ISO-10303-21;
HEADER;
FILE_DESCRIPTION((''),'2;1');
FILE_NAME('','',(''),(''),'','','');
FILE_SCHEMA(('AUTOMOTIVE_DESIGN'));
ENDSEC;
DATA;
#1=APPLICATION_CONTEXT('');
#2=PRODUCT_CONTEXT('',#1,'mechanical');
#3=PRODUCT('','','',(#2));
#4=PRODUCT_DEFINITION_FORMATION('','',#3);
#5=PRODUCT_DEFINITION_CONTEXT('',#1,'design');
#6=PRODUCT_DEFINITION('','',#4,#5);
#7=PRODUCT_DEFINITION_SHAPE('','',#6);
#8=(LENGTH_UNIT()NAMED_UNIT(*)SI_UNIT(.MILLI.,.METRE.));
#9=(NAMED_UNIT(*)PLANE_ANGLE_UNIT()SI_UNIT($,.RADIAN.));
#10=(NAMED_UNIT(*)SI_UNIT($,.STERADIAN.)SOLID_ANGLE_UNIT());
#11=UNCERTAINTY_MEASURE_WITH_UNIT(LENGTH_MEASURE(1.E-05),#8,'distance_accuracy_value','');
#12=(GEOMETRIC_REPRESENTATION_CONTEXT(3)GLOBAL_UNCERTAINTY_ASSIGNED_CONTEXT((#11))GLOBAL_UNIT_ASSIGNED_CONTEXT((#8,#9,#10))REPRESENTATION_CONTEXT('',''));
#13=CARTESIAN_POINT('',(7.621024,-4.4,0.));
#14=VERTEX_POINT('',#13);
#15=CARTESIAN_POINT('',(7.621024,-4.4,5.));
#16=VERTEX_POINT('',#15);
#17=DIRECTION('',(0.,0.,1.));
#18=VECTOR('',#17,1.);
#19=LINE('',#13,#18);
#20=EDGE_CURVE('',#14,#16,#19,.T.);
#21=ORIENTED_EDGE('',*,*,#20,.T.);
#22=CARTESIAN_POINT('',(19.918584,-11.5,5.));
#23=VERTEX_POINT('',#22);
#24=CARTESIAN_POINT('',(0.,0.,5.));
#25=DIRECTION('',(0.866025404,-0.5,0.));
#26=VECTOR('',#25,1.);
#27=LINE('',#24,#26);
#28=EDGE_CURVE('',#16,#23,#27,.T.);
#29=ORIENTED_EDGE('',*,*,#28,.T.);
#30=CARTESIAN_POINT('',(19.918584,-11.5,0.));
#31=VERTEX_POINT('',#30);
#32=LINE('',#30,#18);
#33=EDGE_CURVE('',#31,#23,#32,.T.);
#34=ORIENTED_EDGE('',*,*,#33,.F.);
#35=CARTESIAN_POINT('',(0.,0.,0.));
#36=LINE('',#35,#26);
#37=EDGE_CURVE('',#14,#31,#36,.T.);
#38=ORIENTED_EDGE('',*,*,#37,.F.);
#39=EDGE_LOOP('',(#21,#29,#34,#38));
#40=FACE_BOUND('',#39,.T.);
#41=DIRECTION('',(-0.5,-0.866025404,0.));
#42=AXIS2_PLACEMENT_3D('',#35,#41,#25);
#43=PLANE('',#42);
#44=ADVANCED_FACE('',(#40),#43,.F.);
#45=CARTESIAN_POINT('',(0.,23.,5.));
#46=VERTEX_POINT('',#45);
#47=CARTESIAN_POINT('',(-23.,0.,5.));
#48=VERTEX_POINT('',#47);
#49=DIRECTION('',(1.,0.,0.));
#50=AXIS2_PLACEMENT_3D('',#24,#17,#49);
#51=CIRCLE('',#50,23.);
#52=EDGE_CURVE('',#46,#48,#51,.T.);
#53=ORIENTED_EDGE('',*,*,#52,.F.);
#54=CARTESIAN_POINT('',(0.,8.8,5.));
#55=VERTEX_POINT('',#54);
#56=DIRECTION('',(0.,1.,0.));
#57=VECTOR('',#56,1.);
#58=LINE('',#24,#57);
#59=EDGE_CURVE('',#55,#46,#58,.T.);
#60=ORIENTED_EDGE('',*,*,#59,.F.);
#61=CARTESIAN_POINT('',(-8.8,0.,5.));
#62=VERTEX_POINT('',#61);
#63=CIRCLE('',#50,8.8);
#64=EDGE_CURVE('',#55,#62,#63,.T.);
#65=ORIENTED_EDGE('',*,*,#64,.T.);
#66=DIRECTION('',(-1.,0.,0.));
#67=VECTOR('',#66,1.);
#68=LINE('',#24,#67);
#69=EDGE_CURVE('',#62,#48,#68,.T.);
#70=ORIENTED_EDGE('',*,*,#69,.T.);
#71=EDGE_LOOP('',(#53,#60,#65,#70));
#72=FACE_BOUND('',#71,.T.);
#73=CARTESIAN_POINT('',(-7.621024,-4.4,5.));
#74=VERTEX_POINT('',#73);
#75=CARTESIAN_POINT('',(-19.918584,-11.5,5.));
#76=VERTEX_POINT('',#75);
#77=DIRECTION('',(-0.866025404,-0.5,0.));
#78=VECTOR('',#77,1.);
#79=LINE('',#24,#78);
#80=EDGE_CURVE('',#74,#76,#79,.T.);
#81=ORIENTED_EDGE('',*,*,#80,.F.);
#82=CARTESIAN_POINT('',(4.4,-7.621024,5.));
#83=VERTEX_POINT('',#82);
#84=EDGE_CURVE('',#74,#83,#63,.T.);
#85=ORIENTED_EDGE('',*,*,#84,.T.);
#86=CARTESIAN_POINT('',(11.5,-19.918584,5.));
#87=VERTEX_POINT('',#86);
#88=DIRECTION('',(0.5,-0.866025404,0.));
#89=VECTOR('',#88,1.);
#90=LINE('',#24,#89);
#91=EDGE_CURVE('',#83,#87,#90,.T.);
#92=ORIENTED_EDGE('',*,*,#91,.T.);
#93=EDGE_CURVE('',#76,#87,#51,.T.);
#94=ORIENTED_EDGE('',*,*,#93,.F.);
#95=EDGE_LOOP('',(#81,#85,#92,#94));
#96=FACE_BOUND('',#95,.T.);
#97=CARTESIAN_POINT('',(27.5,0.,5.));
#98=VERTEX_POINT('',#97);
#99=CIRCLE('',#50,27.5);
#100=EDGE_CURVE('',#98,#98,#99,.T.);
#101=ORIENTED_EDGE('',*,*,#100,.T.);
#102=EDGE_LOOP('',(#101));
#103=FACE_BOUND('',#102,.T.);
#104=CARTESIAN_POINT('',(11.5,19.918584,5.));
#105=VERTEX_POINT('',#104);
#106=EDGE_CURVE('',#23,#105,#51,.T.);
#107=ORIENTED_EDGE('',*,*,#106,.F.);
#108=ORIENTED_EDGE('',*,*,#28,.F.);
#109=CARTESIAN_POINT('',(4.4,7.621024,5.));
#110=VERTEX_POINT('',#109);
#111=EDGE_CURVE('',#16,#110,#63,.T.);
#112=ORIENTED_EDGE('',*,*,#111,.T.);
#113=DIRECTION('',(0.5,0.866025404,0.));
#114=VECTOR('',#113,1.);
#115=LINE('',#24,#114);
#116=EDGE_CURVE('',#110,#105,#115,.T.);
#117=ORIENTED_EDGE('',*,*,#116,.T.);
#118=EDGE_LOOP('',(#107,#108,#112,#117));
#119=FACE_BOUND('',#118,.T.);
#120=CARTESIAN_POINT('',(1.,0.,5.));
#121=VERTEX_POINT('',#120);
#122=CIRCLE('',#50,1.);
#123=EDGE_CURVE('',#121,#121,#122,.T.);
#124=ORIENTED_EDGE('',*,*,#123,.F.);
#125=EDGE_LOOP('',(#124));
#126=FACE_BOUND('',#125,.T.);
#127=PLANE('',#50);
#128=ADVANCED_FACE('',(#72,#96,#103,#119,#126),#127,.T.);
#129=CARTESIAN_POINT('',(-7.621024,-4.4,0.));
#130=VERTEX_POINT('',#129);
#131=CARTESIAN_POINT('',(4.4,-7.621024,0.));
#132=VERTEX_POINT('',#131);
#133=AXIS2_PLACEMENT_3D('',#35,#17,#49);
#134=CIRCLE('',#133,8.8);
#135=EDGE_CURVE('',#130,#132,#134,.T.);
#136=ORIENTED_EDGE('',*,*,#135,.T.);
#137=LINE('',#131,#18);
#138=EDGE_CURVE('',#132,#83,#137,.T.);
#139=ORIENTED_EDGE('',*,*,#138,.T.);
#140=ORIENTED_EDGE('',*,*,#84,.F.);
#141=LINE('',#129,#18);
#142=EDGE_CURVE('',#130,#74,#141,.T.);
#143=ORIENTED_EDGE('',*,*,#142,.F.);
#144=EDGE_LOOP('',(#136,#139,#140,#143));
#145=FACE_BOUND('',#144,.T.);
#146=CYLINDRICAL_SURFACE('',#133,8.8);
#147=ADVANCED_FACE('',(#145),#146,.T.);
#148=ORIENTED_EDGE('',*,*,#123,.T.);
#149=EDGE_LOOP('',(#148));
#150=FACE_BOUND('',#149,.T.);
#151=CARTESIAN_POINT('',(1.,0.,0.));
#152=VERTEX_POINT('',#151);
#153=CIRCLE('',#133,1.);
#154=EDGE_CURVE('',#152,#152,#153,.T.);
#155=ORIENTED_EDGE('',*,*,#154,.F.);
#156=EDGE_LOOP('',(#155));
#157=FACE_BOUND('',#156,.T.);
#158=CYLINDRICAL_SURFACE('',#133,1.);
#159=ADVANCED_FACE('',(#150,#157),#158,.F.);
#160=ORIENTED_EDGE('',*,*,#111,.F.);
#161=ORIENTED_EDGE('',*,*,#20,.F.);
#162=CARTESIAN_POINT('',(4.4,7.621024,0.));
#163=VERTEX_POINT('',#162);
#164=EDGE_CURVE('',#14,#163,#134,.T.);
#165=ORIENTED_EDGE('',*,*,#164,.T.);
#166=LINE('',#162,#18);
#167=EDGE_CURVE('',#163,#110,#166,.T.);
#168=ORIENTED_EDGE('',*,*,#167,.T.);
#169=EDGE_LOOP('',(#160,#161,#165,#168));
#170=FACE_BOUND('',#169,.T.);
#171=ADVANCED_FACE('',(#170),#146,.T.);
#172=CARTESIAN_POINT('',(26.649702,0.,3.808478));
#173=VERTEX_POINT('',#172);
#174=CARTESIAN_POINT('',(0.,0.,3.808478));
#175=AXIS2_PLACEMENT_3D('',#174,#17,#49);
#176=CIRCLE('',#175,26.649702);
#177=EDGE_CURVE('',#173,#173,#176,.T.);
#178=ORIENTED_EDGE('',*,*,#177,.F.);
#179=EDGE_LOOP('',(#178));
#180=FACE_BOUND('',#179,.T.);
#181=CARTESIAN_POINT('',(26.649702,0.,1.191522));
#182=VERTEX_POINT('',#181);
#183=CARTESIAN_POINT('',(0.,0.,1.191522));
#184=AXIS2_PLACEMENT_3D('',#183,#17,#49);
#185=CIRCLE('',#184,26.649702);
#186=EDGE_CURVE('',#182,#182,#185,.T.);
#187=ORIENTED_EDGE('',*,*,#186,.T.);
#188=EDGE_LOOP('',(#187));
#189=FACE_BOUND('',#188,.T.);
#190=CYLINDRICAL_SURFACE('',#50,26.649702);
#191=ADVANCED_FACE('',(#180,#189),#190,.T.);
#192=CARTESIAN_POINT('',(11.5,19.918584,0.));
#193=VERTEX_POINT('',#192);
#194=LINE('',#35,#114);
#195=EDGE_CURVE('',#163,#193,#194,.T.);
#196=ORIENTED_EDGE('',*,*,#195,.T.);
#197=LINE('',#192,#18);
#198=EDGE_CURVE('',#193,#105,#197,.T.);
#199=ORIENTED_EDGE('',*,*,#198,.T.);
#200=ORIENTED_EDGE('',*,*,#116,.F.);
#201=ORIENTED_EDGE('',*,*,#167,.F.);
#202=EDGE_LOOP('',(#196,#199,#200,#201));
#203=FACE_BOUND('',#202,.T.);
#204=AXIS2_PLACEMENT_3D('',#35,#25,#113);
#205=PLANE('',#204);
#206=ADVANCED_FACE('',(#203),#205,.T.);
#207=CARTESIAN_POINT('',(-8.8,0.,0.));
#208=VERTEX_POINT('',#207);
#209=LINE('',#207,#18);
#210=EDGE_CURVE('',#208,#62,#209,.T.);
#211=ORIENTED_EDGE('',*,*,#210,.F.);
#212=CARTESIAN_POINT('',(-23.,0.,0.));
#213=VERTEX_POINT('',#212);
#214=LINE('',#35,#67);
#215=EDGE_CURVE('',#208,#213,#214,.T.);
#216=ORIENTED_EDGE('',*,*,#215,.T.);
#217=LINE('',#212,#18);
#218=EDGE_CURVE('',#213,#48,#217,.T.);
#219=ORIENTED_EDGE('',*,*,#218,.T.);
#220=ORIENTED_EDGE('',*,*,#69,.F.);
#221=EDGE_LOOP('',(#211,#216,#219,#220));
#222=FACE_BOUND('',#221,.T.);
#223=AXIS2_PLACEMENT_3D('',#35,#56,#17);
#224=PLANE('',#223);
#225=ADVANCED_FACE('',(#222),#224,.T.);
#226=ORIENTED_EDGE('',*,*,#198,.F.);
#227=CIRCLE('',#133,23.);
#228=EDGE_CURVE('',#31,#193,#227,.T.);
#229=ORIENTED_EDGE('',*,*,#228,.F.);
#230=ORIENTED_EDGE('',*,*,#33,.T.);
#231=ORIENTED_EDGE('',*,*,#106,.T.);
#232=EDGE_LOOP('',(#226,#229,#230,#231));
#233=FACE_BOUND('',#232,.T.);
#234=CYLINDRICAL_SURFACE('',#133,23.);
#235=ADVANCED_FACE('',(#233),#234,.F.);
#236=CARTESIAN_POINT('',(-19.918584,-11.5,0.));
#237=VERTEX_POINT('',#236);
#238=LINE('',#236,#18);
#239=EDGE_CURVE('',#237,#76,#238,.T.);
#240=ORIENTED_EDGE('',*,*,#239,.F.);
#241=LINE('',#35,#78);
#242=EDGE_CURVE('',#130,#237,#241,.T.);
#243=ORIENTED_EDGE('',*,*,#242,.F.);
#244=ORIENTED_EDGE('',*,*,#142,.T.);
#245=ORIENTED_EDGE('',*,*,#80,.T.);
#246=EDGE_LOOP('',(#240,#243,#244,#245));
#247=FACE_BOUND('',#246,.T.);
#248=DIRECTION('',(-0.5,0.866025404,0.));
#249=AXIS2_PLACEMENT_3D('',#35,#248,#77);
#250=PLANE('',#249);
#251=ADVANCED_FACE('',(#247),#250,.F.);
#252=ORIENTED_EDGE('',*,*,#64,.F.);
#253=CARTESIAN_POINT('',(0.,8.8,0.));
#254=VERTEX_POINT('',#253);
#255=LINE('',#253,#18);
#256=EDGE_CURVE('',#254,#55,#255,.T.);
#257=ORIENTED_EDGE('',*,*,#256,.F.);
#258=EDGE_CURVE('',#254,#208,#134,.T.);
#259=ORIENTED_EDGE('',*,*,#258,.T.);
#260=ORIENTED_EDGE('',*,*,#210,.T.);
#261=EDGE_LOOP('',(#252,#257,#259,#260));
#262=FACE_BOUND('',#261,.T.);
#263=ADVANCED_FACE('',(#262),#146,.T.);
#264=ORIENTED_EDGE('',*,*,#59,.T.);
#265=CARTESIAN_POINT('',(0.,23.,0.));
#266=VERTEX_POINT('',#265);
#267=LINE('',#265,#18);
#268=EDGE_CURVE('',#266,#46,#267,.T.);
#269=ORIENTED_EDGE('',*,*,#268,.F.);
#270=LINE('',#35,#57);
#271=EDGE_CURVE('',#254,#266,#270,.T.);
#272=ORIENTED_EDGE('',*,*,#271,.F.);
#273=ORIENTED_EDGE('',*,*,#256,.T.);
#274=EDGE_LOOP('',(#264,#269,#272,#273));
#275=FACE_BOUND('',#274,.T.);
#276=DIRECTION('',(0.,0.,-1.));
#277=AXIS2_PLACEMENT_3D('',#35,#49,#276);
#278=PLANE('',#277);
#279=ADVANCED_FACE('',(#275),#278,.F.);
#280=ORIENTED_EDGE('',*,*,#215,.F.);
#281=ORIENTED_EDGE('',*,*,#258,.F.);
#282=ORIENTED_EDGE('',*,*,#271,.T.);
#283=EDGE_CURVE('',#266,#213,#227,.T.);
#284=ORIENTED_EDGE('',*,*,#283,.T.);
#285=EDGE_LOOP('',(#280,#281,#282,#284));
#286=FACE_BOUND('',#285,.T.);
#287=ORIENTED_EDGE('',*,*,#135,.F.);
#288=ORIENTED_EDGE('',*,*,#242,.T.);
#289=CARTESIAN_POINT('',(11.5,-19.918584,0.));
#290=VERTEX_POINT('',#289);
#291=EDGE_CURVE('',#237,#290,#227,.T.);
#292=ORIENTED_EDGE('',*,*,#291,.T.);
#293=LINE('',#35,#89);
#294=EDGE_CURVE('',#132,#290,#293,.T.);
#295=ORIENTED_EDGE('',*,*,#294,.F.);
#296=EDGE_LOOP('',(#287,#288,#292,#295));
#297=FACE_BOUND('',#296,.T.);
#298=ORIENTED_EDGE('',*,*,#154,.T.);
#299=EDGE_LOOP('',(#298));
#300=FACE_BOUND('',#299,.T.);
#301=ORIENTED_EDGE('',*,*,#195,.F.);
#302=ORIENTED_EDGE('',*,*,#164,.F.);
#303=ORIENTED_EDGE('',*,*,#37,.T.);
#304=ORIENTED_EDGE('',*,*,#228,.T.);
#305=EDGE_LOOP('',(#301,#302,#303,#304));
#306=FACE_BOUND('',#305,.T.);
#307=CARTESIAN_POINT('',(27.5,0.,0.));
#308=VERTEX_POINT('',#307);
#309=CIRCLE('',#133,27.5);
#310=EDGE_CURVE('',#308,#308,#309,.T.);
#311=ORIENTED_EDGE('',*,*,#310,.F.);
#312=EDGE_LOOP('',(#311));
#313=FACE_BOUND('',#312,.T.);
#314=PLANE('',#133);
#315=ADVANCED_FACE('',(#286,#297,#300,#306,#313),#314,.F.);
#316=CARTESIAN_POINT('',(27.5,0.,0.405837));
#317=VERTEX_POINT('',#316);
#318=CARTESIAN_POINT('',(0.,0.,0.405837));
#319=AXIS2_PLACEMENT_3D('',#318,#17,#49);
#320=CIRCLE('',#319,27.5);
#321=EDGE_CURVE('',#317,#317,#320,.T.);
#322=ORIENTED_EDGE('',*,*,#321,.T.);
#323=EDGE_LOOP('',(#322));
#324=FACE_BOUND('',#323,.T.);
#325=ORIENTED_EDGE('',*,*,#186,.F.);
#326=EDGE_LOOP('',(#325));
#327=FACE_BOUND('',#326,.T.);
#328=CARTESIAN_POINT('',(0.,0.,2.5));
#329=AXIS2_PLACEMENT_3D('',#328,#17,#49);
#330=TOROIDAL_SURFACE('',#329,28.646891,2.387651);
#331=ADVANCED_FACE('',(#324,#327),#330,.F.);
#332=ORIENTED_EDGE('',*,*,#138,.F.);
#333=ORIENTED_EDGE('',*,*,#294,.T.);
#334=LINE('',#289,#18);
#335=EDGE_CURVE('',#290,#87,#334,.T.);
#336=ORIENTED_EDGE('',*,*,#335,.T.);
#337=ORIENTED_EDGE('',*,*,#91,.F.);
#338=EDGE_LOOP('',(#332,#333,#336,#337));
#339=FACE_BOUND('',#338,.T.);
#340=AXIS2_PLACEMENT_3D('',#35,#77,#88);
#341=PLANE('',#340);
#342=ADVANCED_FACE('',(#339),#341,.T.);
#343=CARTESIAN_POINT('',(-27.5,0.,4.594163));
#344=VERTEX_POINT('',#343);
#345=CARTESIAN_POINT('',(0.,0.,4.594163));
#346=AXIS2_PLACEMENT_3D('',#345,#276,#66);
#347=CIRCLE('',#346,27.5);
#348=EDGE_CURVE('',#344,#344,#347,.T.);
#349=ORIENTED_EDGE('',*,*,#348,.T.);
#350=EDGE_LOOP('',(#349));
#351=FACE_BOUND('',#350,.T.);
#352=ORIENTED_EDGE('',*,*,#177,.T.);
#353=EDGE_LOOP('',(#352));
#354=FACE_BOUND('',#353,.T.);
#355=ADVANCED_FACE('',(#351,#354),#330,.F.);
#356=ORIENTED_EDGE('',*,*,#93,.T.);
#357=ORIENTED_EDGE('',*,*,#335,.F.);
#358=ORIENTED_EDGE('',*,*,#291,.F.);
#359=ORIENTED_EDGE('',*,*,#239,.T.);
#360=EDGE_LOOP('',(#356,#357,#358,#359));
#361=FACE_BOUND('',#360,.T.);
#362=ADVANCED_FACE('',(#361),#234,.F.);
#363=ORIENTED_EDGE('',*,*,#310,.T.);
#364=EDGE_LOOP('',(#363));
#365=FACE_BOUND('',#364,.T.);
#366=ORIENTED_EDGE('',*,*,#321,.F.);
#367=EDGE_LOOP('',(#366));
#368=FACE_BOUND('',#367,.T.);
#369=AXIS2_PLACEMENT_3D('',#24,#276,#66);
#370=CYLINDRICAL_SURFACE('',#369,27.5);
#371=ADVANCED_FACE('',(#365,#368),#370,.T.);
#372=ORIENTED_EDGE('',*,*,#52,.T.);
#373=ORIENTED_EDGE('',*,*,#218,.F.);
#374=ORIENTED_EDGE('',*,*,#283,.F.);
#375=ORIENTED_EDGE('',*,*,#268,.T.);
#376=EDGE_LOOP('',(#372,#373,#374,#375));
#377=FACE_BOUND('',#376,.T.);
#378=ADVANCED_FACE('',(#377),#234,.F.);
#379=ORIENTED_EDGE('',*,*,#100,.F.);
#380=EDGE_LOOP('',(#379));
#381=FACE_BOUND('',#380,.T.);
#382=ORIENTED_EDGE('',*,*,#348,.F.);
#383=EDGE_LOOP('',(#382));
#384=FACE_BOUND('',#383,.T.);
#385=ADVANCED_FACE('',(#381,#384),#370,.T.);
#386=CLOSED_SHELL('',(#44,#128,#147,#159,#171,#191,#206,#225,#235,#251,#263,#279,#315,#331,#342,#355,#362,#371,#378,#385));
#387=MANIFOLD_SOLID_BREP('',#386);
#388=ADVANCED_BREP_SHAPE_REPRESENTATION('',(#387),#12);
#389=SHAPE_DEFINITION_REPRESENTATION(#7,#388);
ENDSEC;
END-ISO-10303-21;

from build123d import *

# Parameters (mm, degrees)
ESBO_O1_R                = 27.5
RESSALTO_EXTRUS_O1_DEPTH = 5
ESBO_O9_R                = 1
CORTE_EXTRUS_O1_DEPTH    = 5
CORTE_EXTRUS_O2_DEPTH    = 5


with BuildPart() as part:
    # Esboço1 → Ressalto-extrusão1 (new body)
    with BuildSketch(Plane.XY):
        Circle(ESBO_O1_R)
    extrude(amount=RESSALTO_EXTRUS_O1_DEPTH)

    # Esboço7 → Corte-Revolução4 (revolve, cut)
    with BuildSketch(Plane(origin=(0, 0, 0), x_dir=(0, 0, -1), z_dir=(1, 0, 0))):
        with BuildLine():
            ThreePointArc((-0.112348688, 28.646890778), (-3.63505257, 30.747494132), (-3.808478377, 26.649701973))
            Line((-3.808478377, 26.649701973), (-1.191521623, 26.649701973))
            ThreePointArc((-1.191521623, 26.649701973), (-0.399396646, 27.511838208), (-0.112348688, 28.646890778))
        make_face()
    revolve(axis=Axis((0, 0, 5), (0, 0, -1)), mode=Mode.SUBTRACT)

    # Esboço9 → Corte-extrusão1 (cut)
    with BuildSketch(Plane.XY.offset(5)):
        Circle(ESBO_O9_R)
    extrude(amount=-CORTE_EXTRUS_O1_DEPTH, mode=Mode.SUBTRACT)

    # Esboço10 → Corte-extrusão2 (cut)
    with BuildSketch(Plane.XY.offset(5)):
        with BuildLine():
            ThreePointArc((-8.8, 0), (-6.222539674, 6.222539674), (0, 8.8))
            Line((0, 8.8), (0, 23))
            ThreePointArc((0, 23), (-16.263455967, 16.263455967), (-23, 0))
            Line((-23, 0), (-8.8, 0))
        make_face()
        with BuildLine():
            Line((11.5, 19.918584287), (4.4, 7.621023553))
            ThreePointArc((4.4, 7.621023553), (8.500147271, 2.277607597), (7.621023553, -4.4))
            Line((7.621023553, -4.4), (19.918584287, -11.5))
            ThreePointArc((19.918584287, -11.5), (22.216294005, 5.952838037), (11.5, 19.918584287))
        make_face()
        with BuildLine():
            ThreePointArc((4.4, -7.621023553), (-2.277607597, -8.500147271), (-7.621023553, -4.4))
            Line((-7.621023553, -4.4), (-19.918584287, -11.5))
            ThreePointArc((-19.918584287, -11.5), (-5.952838037, -22.216294005), (11.5, -19.918584287))
            Line((11.5, -19.918584287), (4.4, -7.621023553))
        make_face()
    extrude(amount=-CORTE_EXTRUS_O2_DEPTH, mode=Mode.SUBTRACT)


solid = part.part
